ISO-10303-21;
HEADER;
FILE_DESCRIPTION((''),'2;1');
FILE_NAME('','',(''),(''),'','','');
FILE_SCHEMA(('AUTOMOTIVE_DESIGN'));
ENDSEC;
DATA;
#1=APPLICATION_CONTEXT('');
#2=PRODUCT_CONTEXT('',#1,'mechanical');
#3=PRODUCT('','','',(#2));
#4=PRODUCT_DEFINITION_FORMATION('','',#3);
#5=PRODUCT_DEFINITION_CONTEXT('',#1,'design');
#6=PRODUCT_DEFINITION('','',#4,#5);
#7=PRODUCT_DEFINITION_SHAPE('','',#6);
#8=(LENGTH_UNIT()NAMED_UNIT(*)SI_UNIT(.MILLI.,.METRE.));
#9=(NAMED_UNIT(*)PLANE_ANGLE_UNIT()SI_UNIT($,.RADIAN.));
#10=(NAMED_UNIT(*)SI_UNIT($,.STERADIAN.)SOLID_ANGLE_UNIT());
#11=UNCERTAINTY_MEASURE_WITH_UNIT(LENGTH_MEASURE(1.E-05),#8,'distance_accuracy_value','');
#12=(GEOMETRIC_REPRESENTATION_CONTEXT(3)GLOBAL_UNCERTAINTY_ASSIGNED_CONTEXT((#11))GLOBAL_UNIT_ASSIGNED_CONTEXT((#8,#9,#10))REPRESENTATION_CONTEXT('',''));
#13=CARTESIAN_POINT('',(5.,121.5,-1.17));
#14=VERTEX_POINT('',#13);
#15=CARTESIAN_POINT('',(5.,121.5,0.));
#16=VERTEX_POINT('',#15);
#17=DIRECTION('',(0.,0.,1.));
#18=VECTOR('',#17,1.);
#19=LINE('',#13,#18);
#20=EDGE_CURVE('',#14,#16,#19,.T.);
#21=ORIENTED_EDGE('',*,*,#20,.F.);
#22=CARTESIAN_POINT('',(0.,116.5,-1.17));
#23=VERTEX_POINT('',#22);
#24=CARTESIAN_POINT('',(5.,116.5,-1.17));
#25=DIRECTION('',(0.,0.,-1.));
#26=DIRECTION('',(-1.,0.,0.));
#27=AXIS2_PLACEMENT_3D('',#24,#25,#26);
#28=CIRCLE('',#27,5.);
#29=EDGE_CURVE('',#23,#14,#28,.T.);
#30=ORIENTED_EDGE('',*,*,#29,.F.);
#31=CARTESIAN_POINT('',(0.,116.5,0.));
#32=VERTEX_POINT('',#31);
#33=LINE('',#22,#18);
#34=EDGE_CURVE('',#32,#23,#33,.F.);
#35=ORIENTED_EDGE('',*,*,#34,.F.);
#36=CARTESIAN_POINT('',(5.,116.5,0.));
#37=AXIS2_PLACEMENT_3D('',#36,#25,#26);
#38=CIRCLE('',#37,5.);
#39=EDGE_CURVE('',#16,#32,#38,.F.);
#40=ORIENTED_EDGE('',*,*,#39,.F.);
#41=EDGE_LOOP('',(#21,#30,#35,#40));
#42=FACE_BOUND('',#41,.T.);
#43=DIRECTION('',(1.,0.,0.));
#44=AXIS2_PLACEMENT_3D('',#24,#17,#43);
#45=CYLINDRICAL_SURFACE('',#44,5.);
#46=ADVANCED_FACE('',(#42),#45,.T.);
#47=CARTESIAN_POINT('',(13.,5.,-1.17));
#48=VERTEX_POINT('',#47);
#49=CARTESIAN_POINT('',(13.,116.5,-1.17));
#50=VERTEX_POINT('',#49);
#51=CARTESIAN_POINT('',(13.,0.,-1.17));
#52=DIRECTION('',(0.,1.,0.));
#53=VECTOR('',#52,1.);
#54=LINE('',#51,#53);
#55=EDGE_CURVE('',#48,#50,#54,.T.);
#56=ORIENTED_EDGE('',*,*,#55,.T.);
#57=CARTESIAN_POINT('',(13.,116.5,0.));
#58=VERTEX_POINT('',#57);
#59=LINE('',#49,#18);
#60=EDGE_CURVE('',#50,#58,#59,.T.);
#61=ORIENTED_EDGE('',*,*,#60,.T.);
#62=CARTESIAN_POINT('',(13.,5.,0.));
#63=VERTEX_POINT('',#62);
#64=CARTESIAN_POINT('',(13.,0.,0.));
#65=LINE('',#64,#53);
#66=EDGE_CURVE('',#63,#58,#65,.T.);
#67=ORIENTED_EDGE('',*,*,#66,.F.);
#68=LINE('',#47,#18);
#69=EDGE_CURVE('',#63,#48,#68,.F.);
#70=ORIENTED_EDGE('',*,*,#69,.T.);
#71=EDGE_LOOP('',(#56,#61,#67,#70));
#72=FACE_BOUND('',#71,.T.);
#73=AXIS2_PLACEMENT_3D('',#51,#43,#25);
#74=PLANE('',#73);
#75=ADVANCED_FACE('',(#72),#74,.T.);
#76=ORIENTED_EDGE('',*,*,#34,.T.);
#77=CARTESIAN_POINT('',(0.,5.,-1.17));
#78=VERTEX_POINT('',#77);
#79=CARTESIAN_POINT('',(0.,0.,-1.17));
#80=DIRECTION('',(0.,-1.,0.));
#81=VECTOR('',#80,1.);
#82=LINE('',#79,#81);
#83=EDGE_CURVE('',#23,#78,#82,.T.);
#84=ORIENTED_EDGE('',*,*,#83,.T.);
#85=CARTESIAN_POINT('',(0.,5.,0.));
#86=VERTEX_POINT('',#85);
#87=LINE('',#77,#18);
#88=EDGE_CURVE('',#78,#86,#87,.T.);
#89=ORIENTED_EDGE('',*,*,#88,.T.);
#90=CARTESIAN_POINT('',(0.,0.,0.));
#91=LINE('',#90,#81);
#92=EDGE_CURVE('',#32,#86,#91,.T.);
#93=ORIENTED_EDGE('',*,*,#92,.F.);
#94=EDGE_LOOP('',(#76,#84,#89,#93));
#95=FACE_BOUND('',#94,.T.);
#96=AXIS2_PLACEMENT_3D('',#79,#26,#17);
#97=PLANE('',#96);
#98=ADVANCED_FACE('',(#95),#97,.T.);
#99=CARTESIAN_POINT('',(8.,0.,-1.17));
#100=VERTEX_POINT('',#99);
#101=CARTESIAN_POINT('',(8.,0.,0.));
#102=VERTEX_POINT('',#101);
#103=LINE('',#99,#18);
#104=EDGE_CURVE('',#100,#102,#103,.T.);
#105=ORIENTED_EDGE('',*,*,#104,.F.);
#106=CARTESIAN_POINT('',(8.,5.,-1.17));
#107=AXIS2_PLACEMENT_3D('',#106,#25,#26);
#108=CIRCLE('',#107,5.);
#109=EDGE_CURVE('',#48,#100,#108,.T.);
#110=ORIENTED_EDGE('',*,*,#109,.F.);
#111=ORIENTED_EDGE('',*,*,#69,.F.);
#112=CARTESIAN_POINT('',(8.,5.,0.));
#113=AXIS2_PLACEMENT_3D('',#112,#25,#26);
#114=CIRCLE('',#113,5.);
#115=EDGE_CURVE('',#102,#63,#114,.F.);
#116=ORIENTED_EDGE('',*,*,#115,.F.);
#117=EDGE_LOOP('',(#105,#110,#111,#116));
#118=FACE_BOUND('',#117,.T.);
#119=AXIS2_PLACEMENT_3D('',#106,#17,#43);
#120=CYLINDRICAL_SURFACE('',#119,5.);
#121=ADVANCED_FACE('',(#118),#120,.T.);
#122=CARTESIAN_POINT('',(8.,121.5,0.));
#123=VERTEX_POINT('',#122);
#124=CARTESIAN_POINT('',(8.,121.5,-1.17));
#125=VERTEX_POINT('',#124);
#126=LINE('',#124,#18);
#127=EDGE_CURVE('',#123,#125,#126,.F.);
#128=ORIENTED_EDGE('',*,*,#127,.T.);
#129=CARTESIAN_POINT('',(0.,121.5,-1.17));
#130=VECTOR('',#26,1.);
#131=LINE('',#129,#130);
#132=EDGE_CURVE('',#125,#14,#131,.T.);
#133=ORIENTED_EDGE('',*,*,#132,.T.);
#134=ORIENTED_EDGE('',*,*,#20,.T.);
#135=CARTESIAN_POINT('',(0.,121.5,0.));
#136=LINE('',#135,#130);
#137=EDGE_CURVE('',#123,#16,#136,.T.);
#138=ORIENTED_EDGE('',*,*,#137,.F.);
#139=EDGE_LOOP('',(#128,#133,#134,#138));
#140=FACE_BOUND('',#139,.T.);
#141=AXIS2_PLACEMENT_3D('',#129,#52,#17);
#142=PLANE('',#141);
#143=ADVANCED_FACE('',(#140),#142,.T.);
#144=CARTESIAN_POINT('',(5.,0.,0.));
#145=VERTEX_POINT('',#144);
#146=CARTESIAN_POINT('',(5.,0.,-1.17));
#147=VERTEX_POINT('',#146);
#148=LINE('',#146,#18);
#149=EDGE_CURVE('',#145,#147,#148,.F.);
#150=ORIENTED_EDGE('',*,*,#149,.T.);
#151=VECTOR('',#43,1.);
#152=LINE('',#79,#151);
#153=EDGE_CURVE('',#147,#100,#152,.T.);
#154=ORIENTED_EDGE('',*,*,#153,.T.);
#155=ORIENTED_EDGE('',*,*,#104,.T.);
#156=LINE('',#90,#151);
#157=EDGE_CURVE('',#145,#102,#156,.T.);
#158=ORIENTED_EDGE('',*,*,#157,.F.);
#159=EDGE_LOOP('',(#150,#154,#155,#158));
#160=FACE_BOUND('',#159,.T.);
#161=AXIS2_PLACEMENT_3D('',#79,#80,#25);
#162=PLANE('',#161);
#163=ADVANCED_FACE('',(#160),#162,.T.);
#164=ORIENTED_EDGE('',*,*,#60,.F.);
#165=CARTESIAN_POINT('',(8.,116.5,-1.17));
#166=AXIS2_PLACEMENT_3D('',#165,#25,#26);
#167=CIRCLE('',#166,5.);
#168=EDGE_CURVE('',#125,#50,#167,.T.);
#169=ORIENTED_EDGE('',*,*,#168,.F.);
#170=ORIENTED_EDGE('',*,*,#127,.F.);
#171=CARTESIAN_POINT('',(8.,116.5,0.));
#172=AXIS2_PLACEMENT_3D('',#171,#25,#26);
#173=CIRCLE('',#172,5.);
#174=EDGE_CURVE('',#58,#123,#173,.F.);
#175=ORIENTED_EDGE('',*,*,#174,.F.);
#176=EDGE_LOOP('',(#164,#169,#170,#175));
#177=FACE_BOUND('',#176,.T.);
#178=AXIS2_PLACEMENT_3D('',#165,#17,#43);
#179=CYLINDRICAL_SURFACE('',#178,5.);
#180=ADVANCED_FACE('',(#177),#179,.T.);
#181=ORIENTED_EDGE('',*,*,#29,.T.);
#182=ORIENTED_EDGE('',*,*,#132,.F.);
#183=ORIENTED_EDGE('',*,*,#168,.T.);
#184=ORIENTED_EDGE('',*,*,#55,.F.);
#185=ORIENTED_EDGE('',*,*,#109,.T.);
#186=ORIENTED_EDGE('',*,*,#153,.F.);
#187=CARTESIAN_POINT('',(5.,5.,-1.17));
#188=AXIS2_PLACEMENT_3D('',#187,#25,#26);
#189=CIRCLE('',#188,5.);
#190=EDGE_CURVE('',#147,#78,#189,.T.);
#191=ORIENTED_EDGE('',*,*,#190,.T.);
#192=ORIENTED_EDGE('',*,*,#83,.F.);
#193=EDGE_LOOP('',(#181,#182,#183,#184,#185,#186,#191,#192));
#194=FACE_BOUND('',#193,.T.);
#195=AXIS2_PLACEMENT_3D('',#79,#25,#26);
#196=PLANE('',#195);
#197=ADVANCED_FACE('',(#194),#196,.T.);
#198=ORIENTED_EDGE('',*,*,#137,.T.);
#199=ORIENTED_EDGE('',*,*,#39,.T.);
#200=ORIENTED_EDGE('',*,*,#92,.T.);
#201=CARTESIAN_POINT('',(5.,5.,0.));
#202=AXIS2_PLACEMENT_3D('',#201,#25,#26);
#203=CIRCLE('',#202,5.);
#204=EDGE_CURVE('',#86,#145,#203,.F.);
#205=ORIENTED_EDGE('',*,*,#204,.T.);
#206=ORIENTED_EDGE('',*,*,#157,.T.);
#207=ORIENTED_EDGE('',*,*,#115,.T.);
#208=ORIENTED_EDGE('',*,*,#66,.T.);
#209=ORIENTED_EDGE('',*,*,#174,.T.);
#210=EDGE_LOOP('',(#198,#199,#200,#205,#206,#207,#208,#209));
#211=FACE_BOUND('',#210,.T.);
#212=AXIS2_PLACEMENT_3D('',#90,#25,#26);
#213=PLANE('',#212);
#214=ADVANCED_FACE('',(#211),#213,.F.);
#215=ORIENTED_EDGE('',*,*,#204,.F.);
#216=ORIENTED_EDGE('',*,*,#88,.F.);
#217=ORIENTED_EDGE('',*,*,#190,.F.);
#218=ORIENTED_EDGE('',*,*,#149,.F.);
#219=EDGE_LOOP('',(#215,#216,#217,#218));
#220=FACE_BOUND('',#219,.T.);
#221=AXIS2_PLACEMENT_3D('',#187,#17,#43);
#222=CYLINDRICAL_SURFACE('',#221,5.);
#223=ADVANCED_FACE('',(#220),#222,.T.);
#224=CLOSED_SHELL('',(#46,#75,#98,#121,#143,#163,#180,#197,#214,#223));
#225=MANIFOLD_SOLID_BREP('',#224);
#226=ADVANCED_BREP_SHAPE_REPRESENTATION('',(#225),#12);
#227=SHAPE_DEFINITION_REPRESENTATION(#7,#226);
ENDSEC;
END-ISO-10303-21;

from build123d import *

# Parameters (mm, degrees)
SKETCH1_W          = 13
SKETCH1_H          = 121.5
BASE_FLANGE1_DEPTH = 1.17
FILLET1_R          = 5


# Sheet-metal steps are written as plain solids
with BuildPart() as part:
    # Sketch1 → Base-Flange1 (new body)
    with BuildSketch(Plane.XY):
        with Locations((6.5, 60.75)):
            Rectangle(SKETCH1_W, SKETCH1_H)
    extrude(amount=-BASE_FLANGE1_DEPTH)

    # Fillet1
    fillet1_edges = [part.edges().sort_by_distance(p)[0] for p in [
        (0, 121.5, -0.585),
        (13, 121.5, -0.585),
        (13, 0, -0.585),
        (0, 0, -0.585),
    ]]
    fillet(fillet1_edges, radius=FILLET1_R)


solid = part.part
